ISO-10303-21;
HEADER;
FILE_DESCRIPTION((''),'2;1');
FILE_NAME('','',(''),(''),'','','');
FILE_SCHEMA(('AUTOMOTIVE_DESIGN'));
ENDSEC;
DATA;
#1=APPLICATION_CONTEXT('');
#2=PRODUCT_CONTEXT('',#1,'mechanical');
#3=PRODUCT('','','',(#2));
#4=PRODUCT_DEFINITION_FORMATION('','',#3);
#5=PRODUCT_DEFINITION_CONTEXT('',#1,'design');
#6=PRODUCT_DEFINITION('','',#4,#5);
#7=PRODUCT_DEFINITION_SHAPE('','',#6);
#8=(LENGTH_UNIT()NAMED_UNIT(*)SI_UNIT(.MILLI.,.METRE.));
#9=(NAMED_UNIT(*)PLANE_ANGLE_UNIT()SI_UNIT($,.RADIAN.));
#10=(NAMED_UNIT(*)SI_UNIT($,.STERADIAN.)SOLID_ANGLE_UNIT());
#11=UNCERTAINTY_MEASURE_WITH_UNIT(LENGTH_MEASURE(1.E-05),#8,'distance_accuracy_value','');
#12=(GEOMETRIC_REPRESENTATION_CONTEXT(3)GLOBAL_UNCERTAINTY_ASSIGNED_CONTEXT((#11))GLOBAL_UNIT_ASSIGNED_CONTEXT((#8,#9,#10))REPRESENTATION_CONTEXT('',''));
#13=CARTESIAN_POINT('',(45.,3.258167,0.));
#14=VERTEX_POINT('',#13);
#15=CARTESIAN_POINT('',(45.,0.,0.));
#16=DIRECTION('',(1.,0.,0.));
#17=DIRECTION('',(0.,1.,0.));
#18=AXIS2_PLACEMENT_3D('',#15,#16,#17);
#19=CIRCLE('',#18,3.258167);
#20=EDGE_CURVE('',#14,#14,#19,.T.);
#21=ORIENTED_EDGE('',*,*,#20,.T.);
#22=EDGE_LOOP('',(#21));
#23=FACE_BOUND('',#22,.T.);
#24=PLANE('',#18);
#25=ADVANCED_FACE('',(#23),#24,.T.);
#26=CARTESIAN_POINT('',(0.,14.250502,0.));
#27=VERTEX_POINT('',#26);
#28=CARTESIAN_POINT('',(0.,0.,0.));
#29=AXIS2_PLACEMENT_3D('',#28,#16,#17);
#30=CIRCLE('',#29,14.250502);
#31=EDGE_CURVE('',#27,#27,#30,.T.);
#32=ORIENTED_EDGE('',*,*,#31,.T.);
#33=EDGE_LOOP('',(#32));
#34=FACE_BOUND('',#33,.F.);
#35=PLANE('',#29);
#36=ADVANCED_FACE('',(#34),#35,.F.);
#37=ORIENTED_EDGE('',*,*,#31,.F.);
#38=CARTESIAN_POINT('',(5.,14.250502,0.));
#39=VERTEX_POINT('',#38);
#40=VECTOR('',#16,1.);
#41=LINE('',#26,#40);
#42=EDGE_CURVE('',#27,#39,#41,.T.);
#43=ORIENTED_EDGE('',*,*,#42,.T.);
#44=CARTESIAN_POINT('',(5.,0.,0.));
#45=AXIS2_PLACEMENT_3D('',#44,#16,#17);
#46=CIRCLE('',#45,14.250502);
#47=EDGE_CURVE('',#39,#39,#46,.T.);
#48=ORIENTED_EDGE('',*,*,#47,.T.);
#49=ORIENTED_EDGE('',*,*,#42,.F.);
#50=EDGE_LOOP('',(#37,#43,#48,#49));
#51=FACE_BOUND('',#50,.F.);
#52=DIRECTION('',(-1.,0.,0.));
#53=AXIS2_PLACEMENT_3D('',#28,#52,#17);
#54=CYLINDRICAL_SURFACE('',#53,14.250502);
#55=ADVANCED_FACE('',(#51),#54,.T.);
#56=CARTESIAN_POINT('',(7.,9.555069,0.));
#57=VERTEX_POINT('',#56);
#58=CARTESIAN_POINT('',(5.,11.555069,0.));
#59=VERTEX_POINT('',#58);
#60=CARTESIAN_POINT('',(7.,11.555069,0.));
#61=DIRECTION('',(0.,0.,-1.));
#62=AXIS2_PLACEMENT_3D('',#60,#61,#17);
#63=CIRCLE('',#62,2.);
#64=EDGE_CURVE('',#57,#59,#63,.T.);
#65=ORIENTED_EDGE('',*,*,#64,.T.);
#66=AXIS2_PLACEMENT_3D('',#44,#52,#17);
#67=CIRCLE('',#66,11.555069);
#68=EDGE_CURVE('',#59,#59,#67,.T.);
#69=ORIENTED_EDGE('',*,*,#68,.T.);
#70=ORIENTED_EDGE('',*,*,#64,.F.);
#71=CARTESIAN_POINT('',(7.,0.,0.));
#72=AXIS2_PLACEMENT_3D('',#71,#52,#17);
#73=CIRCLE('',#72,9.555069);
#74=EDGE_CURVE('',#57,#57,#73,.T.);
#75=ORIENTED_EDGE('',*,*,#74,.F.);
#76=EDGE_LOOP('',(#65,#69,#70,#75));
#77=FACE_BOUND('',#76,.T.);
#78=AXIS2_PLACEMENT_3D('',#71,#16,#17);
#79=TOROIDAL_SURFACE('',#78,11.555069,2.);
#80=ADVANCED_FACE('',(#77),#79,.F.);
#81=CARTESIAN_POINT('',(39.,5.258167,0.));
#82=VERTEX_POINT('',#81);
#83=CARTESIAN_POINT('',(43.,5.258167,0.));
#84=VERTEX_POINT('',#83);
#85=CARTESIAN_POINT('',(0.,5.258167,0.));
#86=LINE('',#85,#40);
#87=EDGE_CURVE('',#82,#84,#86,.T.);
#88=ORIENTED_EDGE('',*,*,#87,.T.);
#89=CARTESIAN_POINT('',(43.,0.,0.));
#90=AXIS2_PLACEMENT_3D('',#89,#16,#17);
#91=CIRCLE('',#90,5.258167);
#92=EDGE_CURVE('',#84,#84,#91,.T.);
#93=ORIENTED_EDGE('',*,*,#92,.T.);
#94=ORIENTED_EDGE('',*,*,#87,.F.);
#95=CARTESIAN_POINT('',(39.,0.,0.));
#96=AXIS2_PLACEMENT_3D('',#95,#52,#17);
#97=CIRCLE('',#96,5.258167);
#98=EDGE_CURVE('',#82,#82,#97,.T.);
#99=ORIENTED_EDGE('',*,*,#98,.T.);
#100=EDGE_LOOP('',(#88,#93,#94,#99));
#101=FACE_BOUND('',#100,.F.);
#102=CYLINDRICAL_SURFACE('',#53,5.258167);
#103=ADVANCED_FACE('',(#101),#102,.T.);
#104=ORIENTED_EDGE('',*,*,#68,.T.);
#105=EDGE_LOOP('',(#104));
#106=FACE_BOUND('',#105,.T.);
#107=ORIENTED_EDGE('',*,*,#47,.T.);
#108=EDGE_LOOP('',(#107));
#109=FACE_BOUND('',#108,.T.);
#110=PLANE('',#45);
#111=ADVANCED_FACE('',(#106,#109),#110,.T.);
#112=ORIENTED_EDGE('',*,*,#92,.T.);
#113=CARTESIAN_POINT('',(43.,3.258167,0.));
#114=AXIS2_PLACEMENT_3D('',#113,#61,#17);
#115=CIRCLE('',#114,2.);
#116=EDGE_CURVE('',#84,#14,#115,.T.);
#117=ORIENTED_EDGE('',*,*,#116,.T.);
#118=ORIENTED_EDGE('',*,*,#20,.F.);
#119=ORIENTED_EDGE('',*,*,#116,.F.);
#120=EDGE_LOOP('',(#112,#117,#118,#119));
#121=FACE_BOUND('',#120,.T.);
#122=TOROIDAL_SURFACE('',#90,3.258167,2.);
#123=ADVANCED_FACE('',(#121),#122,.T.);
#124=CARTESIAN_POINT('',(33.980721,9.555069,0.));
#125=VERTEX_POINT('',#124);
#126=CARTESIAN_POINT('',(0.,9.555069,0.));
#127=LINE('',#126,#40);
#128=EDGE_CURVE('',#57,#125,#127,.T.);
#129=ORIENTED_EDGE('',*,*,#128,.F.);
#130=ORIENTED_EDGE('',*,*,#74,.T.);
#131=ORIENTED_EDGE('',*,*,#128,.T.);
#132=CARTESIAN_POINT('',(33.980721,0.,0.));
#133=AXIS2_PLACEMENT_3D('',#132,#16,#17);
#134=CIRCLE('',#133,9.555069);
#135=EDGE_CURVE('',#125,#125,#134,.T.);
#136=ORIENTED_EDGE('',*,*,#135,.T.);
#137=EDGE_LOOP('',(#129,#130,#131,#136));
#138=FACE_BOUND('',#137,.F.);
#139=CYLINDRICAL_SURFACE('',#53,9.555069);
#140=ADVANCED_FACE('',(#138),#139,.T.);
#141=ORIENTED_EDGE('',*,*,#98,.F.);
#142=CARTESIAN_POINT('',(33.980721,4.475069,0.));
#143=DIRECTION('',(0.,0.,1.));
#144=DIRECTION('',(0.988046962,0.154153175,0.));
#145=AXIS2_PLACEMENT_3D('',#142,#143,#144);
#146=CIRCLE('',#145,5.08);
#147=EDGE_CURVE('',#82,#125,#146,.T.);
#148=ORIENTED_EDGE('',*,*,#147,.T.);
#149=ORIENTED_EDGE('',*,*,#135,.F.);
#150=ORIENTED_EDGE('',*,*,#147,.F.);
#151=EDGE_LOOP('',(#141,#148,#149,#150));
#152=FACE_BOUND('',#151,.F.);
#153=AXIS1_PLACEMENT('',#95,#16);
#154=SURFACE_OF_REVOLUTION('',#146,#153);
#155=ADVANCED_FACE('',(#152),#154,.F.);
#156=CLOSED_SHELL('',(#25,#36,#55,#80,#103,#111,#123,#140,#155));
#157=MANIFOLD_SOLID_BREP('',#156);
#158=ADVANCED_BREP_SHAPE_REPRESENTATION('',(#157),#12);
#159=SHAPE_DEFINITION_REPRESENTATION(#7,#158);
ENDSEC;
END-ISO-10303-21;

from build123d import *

# Parameters (mm, degrees)
F0_R      = 5.258166692
F12_DEPTH = 45
F1_R      = 9.5550685652
F2_DEPTH  = 39
F13_R     = 14.2505021401
F3_DEPTH  = 5
F4_R      = 2
F6_R      = 2
F10_W     = 1.8654689193
F10_H     = 2.0018368959
F11_DEPTH = 45


# Not quite as in the source:
# - a fillet or chamfer that OpenCascade refuses, or shapes differently, is made with other operations: its cross-section is extruded or revolved along the edge and cut away or added
# - the program builds the solid bodies; features that only make, move or delete a surface that nothing else refers to are left out


with BuildPart() as f12:
    # F0 (on Right) → F12 (new body)
    with BuildSketch(Plane.YZ):
        Circle(F0_R)
    extrude(amount=F12_DEPTH)

    # F1 (on Right) → F2 (join)
    with BuildSketch(Plane.YZ):
        Circle(F1_R)
    extrude(amount=F2_DEPTH)

    # F13 (on Right) → F3 (join)
    with BuildSketch(Plane.YZ):
        Circle(F13_R)
    extrude(amount=F3_DEPTH)

    # F4
    f4_edges = [f12.edges().sort_by_distance(p)[0] for p in [
        (45, -5.258167, 0),
    ]]
    fillet(f4_edges, radius=F4_R)

    # F5: fillet of radius 5.08 on 1 edges, made by hand

    # F5_s1 → F5_t2 (revolve, cut)
    with BuildSketch(Plane.XY):
        with BuildLine():
            ThreePointArc((39, 5.258166692), (37.2843755862, 8.3341188683), (33.9807214339, 9.5550685652))
            Line((33.9807214339, 9.5550685652), (39, 9.5550685652))
            Line((39, 9.5550685652), (39, 5.258166692))
        make_face()
    revolve(axis=Axis((39, 0, 0), (1, 0, 0)), mode=Mode.SUBTRACT)

    # F6
    f6_edges = [f12.edges().sort_by_distance(p)[0] for p in [
        (5, -9.555069, 0),
    ]]
    fillet(f6_edges, radius=F6_R)

    # F10 (on Right) → F11 (join)
    with BuildSketch(Plane.YZ):
        Rectangle(F10_W, F10_H)
    extrude(amount=F11_DEPTH)


solid = f12.part
